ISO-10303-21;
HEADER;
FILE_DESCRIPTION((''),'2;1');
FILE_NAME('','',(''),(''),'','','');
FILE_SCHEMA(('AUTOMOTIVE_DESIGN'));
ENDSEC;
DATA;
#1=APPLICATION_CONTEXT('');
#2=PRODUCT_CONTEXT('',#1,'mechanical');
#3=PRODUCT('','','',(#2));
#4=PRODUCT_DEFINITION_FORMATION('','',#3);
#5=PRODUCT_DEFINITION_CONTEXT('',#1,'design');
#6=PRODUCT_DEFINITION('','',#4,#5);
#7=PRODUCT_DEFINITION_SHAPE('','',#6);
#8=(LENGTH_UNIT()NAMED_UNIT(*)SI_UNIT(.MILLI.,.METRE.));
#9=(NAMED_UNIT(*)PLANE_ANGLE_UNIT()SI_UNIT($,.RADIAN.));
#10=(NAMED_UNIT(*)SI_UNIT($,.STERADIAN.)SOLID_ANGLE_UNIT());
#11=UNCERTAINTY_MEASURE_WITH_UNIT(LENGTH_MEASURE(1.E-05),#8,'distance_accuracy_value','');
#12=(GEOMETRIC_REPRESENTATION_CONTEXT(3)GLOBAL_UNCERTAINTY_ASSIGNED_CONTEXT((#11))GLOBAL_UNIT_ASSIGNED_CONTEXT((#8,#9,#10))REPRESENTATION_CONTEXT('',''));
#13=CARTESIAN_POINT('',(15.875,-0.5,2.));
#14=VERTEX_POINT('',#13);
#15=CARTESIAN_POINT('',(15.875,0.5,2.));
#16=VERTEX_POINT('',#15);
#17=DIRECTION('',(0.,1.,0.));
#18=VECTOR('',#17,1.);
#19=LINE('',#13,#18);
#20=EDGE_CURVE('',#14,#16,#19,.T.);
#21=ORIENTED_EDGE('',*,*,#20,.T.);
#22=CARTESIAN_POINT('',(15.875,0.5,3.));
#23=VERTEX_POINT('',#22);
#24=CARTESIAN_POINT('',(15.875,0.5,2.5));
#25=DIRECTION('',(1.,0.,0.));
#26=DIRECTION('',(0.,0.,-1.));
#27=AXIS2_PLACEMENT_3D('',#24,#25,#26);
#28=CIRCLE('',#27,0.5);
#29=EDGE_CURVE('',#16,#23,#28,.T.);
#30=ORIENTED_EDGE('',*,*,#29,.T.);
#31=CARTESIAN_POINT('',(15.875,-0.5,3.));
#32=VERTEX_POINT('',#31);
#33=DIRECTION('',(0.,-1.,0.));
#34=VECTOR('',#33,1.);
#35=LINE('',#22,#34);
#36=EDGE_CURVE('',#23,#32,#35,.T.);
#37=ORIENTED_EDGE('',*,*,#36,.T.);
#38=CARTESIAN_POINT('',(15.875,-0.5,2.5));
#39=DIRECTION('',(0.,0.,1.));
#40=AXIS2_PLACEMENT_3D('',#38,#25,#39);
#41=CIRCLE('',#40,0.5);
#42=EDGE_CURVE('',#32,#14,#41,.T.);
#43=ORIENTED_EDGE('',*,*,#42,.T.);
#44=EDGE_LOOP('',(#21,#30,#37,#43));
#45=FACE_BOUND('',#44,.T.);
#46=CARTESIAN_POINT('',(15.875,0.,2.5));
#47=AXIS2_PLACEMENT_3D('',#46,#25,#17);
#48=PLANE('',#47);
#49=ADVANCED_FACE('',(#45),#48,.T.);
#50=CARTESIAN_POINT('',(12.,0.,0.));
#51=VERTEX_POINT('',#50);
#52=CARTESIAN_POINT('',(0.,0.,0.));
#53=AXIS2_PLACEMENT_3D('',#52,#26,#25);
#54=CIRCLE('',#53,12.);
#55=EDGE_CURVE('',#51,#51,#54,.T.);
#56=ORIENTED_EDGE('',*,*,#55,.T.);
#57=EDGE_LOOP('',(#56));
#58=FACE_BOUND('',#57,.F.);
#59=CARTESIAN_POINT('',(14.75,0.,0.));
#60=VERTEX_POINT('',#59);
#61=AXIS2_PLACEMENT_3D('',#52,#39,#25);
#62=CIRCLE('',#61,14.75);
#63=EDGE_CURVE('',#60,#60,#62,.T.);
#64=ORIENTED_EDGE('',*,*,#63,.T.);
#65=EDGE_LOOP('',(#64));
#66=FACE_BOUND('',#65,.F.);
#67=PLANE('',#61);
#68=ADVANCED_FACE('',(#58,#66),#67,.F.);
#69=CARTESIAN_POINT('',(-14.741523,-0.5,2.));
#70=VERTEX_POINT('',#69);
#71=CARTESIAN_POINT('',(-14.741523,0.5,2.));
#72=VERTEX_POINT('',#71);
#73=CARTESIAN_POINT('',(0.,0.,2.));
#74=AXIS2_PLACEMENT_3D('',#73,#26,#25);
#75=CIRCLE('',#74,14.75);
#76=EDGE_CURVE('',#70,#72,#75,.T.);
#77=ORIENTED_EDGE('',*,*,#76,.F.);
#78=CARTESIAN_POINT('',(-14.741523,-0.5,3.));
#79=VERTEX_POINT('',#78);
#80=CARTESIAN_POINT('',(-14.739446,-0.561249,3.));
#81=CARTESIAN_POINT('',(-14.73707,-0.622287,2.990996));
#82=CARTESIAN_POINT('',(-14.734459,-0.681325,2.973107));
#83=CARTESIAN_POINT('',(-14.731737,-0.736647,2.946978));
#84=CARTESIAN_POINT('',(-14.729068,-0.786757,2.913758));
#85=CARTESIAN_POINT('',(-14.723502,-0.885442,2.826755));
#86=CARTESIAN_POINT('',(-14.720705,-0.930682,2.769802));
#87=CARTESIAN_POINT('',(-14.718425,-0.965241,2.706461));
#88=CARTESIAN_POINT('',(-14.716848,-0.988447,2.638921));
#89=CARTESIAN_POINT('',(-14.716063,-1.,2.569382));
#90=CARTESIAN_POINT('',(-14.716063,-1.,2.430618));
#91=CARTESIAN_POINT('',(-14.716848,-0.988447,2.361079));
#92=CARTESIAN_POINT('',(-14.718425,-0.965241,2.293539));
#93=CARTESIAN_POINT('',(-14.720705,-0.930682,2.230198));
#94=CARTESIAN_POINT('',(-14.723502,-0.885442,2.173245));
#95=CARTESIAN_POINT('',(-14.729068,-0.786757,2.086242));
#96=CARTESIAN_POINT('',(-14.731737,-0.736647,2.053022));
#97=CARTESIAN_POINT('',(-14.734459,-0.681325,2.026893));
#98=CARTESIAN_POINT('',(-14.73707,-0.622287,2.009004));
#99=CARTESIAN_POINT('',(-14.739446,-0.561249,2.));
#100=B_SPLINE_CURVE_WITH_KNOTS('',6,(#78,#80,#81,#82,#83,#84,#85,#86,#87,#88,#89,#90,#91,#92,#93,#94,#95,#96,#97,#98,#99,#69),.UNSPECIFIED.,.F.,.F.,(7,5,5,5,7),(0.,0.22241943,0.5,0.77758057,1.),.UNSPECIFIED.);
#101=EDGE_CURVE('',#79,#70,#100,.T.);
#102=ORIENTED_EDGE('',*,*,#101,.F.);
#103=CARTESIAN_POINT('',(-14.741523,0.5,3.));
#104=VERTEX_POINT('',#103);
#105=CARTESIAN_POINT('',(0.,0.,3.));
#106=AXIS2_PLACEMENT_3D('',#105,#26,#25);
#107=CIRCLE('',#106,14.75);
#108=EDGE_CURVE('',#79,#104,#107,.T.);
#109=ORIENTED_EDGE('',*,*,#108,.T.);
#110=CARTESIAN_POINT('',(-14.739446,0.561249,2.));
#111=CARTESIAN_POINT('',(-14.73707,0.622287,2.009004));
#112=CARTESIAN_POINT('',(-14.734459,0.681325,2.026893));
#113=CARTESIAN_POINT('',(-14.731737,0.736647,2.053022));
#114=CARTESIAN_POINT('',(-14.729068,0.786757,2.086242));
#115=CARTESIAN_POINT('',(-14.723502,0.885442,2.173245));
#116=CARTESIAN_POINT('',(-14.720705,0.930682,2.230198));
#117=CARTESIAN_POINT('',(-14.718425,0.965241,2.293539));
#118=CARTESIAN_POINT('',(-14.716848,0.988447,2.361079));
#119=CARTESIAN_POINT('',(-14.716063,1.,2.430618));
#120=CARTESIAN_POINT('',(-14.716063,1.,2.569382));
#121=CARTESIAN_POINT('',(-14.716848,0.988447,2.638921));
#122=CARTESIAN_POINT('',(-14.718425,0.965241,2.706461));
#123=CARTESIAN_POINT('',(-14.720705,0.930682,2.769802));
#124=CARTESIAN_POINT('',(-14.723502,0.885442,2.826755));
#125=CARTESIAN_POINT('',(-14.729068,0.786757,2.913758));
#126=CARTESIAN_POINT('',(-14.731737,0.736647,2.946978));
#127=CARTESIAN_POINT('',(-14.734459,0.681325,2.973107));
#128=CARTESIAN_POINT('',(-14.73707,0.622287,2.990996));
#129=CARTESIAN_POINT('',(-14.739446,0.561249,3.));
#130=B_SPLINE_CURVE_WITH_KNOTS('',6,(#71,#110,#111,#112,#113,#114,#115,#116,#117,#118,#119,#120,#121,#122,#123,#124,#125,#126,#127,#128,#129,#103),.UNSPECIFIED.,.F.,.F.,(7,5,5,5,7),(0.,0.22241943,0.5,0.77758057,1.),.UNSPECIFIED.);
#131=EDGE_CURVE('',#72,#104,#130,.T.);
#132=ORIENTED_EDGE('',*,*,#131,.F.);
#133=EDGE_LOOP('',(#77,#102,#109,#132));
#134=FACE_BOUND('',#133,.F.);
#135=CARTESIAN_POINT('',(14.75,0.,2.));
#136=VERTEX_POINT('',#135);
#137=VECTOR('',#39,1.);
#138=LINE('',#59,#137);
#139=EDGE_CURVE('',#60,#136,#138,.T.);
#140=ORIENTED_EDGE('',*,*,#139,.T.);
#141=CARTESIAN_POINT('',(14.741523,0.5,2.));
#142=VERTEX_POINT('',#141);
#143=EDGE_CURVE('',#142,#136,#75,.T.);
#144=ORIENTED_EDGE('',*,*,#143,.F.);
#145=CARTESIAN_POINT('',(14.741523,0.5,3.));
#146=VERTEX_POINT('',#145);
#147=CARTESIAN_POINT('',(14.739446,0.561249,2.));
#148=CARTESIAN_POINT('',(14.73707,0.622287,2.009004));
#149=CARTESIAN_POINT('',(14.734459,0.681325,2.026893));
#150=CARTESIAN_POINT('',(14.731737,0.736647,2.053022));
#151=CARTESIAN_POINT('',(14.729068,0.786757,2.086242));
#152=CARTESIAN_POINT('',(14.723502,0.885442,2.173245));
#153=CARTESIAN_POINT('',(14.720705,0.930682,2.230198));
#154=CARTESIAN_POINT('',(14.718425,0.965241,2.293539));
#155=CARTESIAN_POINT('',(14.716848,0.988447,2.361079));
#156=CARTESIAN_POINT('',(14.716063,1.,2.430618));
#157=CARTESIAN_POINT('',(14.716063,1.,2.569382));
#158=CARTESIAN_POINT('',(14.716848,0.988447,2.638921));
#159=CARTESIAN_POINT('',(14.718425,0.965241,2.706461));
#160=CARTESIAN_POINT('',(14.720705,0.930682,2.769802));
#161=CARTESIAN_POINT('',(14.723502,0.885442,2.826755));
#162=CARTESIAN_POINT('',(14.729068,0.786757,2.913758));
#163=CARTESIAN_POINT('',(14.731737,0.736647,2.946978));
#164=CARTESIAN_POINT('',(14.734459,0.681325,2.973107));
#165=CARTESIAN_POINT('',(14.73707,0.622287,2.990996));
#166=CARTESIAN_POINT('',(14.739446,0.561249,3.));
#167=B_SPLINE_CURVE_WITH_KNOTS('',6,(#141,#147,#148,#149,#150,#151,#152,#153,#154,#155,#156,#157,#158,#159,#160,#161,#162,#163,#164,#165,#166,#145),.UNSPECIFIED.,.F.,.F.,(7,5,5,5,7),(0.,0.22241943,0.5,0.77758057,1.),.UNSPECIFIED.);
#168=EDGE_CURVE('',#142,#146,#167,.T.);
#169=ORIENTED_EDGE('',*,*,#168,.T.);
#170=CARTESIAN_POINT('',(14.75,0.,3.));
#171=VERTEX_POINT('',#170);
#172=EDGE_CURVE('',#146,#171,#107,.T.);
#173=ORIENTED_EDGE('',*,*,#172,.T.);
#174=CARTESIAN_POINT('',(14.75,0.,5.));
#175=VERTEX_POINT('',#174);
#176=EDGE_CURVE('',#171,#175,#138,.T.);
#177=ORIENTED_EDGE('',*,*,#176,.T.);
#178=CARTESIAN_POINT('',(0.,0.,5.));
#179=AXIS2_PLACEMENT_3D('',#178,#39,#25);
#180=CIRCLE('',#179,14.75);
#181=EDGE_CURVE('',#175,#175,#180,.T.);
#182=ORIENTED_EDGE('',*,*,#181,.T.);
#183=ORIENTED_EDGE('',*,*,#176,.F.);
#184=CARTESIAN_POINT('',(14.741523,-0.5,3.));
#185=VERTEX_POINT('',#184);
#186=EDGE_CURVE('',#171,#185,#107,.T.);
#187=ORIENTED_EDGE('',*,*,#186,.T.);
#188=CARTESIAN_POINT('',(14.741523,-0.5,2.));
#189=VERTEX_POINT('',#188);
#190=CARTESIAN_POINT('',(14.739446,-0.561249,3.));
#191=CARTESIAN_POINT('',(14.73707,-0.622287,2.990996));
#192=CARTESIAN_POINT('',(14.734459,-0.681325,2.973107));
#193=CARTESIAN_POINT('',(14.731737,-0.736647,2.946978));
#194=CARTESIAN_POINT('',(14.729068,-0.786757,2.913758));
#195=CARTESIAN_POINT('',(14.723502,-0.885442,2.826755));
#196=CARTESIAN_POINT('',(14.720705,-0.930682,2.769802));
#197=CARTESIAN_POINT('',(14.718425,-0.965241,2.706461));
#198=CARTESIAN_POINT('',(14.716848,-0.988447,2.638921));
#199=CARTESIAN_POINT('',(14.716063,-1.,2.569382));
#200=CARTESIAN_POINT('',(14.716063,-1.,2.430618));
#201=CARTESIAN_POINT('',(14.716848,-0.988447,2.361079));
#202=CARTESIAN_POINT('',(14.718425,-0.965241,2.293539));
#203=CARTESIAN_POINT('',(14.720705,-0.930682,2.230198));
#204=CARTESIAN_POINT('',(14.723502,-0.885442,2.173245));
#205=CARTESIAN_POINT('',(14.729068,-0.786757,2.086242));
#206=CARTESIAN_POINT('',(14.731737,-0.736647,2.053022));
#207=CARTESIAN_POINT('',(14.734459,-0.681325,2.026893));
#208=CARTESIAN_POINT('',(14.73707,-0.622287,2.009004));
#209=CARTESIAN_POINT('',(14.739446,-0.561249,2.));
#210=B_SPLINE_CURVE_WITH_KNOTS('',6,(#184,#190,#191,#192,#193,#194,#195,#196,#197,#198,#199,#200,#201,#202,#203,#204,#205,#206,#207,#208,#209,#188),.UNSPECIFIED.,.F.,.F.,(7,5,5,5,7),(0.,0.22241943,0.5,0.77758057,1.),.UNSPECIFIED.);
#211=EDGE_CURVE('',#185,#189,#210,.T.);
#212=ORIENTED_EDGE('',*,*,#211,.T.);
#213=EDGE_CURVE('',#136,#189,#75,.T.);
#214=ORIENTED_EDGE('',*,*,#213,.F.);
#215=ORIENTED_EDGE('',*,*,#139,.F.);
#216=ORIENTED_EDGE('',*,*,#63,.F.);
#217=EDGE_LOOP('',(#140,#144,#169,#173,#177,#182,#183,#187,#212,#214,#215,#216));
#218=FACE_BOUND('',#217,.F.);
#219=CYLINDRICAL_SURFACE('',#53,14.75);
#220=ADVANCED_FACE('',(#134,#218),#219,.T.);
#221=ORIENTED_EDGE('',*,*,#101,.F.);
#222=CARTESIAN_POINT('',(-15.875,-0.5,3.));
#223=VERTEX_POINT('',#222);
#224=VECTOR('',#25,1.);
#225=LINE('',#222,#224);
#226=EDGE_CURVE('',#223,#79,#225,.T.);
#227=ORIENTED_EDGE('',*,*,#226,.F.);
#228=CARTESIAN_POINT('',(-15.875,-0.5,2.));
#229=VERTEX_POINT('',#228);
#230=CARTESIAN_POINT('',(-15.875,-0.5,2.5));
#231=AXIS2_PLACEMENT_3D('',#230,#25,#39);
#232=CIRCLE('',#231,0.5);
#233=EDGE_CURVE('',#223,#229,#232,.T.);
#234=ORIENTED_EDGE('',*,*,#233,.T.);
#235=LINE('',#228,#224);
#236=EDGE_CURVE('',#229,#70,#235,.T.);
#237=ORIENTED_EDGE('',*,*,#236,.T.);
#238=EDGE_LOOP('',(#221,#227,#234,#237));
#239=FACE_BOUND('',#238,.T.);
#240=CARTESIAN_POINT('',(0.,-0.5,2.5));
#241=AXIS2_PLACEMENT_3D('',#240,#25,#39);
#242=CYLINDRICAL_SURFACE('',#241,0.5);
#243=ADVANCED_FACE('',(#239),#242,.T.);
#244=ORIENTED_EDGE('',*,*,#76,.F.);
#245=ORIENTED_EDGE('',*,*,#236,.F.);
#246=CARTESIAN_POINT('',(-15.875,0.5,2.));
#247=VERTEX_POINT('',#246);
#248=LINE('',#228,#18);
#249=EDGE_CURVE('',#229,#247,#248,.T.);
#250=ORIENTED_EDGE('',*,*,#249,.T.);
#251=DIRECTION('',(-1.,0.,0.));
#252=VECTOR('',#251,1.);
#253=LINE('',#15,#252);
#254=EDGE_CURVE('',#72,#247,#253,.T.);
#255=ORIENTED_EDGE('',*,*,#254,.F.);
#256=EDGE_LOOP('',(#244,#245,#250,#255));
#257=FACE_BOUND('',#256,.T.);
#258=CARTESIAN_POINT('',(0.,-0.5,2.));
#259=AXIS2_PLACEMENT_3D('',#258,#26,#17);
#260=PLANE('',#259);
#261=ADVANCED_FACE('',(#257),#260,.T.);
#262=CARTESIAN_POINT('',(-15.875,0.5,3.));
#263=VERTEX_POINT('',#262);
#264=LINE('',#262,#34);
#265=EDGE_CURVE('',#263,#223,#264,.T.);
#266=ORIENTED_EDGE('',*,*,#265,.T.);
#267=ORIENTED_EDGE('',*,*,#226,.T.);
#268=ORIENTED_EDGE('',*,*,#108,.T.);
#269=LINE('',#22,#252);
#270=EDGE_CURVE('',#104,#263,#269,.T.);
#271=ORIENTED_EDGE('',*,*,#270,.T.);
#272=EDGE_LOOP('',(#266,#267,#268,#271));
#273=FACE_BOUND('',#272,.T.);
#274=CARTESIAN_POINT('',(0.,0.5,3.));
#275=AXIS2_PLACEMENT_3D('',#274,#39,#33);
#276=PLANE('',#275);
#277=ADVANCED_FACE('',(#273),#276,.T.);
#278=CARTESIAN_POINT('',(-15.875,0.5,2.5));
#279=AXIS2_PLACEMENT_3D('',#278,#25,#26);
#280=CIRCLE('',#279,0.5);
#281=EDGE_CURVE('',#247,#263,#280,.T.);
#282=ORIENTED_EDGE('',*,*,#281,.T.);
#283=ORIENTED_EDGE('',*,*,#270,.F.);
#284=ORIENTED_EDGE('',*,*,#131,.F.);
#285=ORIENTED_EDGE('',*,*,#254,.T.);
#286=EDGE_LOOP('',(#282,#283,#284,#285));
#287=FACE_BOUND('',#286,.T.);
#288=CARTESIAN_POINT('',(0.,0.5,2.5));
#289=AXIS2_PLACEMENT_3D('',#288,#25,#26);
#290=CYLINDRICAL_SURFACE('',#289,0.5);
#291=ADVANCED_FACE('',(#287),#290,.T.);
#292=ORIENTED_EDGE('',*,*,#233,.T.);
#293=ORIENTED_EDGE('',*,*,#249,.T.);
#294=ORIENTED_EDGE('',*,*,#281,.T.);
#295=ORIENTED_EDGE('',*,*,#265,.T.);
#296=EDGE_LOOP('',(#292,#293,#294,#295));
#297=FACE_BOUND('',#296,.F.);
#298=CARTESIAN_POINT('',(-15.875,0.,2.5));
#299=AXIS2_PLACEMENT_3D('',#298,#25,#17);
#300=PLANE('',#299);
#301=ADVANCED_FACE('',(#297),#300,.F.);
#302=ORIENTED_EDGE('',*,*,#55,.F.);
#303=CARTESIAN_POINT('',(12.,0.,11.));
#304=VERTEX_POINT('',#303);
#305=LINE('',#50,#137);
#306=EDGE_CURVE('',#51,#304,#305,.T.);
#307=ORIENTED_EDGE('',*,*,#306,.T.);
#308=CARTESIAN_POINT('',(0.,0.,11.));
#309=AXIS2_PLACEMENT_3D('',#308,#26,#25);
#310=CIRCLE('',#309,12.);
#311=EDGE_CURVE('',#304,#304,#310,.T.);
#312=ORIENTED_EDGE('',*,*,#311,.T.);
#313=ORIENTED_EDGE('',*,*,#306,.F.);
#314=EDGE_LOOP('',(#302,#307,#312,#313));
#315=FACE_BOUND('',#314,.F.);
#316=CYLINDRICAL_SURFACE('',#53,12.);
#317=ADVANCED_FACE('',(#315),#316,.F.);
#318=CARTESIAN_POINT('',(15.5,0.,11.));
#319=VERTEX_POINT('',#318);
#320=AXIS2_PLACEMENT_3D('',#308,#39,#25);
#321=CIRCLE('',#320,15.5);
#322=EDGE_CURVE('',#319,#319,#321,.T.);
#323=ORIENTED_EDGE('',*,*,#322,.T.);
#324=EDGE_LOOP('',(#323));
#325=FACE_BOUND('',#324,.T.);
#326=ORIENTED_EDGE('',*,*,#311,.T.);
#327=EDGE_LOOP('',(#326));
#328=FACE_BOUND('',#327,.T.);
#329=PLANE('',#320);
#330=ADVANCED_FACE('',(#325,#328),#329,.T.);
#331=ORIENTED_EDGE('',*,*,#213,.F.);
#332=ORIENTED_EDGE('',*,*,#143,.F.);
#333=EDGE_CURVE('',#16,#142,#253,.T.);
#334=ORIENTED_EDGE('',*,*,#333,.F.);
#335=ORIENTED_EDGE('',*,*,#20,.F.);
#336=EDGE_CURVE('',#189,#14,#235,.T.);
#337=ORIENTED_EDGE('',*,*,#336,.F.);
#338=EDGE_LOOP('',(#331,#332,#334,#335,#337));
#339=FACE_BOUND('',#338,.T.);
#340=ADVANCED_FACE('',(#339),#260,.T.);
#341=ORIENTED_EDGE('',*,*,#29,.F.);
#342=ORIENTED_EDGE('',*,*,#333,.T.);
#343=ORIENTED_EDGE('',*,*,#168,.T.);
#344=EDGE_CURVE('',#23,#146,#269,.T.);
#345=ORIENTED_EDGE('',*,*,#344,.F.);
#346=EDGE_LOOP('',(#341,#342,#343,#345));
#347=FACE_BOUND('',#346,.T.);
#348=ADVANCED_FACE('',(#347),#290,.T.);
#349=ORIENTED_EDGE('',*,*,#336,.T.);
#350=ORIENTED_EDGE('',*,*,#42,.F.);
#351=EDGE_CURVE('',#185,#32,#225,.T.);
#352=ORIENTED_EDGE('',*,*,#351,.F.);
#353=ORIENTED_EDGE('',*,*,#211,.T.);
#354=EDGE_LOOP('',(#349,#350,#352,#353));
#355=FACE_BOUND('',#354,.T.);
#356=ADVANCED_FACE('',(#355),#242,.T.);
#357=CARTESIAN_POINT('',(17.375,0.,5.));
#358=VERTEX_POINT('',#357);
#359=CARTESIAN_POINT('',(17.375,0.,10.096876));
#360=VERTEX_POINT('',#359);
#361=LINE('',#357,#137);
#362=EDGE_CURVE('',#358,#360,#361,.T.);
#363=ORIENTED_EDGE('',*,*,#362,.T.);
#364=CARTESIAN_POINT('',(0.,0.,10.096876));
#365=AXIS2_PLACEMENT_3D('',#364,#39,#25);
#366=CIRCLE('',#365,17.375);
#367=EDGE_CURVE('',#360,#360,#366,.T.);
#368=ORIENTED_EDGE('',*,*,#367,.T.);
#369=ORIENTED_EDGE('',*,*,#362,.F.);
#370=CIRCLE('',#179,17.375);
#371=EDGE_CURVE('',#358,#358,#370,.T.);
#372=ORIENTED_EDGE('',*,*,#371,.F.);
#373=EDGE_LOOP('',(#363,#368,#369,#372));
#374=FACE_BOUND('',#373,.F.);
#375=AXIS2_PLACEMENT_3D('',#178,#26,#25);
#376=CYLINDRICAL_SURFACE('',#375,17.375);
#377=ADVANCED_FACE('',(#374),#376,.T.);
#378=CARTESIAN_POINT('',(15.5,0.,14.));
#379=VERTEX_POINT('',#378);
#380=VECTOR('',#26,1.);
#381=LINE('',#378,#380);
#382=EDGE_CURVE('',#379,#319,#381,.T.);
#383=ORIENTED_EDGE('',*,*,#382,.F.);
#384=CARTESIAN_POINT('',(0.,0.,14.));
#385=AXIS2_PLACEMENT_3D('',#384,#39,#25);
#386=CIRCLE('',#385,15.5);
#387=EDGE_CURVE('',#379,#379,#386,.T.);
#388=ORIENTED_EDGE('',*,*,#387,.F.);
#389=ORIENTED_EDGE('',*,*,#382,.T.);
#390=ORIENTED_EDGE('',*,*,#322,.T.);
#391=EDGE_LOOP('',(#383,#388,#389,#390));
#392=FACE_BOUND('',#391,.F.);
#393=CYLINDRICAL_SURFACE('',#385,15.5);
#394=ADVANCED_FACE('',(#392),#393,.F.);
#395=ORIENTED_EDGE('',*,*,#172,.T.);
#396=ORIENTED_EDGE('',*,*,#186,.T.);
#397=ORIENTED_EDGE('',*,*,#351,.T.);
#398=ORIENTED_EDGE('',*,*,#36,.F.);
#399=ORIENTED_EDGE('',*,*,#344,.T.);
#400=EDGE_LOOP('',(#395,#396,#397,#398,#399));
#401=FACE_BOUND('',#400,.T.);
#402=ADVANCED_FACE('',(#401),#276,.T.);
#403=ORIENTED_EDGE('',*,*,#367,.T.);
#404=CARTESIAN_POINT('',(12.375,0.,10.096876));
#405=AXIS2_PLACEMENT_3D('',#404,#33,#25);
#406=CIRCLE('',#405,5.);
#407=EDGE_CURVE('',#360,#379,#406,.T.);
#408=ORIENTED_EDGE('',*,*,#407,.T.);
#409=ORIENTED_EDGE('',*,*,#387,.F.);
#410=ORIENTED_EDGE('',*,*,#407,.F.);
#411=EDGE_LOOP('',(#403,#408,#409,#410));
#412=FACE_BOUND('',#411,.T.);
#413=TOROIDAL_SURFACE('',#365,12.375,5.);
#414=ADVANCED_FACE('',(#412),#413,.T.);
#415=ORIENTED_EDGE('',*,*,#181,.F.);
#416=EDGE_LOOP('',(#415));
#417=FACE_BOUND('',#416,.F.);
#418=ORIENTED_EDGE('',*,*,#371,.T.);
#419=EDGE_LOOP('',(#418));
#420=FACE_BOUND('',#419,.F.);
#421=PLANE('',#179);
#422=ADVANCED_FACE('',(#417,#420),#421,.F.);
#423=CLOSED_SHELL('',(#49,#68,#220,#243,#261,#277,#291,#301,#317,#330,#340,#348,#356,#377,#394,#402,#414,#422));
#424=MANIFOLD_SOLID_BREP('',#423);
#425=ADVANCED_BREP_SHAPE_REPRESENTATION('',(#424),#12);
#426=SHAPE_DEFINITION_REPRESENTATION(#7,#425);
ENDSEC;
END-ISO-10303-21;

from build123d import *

# Parameters (mm, degrees)
F0_R     = 14.75
F1_DEPTH = 5
F2_R     = 17.375
F3_DEPTH = 9
F5_DEPTH = 15.875
F6_R     = 12
F7_DEPTH = 15
F8_R     = 15.5
F9_DEPTH = 3


# Not quite as in the source:
# - a fillet or chamfer that OpenCascade refuses, or shapes differently, is made with other operations: its cross-section is extruded or revolved along the edge and cut away or added


with BuildPart() as f1:
    # F0 (on Top) → F1 (new body)
    with BuildSketch(Plane.XY):
        Circle(F0_R)
    extrude(amount=F1_DEPTH)

    # F2 (on face) → F3 (join)
    with BuildSketch(Plane.XY.offset(5)):
        Circle(F2_R)
    extrude(amount=F3_DEPTH)

    # F4 (on Right) → F5 (join, symmetric)
    with BuildSketch(Plane.YZ):
        with BuildLine():
            Line((0.5, 3), (-0.5, 3))
            ThreePointArc((-0.5, 3), (-1, 2.5), (-0.5, 2))
            Line((-0.5, 2), (0.5, 2))
            ThreePointArc((0.5, 2), (1, 2.5), (0.5, 3))
        make_face()
    extrude(amount=F5_DEPTH, both=True)

    # F6 (on face) → F7 (cut)
    with BuildSketch(Plane(origin=(0, 0, 0), x_dir=(1, 0, 0), z_dir=(0, 0, -1))):
        Circle(F6_R)
    extrude(amount=-F7_DEPTH, mode=Mode.SUBTRACT)

    # F8 (on face) → F9 (cut)
    with BuildSketch(Plane.XY.offset(14)):
        Circle(F8_R)
    extrude(amount=-F9_DEPTH, mode=Mode.SUBTRACT)

    # F10: fillet of radius 5 on 1 edges, made by hand

    # F10_s1 → F10_t2 (revolve, cut)
    with BuildSketch(Plane.XZ):
        with BuildLine():
            ThreePointArc((17.375, 10.096876251), (16.8819390943, 12.2619397605), (15.5, 14))
            Line((15.5, 14), (17.375, 14))
            Line((17.375, 14), (17.375, 10.096876251))
        make_face()
    revolve(axis=Axis((0, 0, 14), (0, 0, 1)), mode=Mode.SUBTRACT)


solid = f1.part
